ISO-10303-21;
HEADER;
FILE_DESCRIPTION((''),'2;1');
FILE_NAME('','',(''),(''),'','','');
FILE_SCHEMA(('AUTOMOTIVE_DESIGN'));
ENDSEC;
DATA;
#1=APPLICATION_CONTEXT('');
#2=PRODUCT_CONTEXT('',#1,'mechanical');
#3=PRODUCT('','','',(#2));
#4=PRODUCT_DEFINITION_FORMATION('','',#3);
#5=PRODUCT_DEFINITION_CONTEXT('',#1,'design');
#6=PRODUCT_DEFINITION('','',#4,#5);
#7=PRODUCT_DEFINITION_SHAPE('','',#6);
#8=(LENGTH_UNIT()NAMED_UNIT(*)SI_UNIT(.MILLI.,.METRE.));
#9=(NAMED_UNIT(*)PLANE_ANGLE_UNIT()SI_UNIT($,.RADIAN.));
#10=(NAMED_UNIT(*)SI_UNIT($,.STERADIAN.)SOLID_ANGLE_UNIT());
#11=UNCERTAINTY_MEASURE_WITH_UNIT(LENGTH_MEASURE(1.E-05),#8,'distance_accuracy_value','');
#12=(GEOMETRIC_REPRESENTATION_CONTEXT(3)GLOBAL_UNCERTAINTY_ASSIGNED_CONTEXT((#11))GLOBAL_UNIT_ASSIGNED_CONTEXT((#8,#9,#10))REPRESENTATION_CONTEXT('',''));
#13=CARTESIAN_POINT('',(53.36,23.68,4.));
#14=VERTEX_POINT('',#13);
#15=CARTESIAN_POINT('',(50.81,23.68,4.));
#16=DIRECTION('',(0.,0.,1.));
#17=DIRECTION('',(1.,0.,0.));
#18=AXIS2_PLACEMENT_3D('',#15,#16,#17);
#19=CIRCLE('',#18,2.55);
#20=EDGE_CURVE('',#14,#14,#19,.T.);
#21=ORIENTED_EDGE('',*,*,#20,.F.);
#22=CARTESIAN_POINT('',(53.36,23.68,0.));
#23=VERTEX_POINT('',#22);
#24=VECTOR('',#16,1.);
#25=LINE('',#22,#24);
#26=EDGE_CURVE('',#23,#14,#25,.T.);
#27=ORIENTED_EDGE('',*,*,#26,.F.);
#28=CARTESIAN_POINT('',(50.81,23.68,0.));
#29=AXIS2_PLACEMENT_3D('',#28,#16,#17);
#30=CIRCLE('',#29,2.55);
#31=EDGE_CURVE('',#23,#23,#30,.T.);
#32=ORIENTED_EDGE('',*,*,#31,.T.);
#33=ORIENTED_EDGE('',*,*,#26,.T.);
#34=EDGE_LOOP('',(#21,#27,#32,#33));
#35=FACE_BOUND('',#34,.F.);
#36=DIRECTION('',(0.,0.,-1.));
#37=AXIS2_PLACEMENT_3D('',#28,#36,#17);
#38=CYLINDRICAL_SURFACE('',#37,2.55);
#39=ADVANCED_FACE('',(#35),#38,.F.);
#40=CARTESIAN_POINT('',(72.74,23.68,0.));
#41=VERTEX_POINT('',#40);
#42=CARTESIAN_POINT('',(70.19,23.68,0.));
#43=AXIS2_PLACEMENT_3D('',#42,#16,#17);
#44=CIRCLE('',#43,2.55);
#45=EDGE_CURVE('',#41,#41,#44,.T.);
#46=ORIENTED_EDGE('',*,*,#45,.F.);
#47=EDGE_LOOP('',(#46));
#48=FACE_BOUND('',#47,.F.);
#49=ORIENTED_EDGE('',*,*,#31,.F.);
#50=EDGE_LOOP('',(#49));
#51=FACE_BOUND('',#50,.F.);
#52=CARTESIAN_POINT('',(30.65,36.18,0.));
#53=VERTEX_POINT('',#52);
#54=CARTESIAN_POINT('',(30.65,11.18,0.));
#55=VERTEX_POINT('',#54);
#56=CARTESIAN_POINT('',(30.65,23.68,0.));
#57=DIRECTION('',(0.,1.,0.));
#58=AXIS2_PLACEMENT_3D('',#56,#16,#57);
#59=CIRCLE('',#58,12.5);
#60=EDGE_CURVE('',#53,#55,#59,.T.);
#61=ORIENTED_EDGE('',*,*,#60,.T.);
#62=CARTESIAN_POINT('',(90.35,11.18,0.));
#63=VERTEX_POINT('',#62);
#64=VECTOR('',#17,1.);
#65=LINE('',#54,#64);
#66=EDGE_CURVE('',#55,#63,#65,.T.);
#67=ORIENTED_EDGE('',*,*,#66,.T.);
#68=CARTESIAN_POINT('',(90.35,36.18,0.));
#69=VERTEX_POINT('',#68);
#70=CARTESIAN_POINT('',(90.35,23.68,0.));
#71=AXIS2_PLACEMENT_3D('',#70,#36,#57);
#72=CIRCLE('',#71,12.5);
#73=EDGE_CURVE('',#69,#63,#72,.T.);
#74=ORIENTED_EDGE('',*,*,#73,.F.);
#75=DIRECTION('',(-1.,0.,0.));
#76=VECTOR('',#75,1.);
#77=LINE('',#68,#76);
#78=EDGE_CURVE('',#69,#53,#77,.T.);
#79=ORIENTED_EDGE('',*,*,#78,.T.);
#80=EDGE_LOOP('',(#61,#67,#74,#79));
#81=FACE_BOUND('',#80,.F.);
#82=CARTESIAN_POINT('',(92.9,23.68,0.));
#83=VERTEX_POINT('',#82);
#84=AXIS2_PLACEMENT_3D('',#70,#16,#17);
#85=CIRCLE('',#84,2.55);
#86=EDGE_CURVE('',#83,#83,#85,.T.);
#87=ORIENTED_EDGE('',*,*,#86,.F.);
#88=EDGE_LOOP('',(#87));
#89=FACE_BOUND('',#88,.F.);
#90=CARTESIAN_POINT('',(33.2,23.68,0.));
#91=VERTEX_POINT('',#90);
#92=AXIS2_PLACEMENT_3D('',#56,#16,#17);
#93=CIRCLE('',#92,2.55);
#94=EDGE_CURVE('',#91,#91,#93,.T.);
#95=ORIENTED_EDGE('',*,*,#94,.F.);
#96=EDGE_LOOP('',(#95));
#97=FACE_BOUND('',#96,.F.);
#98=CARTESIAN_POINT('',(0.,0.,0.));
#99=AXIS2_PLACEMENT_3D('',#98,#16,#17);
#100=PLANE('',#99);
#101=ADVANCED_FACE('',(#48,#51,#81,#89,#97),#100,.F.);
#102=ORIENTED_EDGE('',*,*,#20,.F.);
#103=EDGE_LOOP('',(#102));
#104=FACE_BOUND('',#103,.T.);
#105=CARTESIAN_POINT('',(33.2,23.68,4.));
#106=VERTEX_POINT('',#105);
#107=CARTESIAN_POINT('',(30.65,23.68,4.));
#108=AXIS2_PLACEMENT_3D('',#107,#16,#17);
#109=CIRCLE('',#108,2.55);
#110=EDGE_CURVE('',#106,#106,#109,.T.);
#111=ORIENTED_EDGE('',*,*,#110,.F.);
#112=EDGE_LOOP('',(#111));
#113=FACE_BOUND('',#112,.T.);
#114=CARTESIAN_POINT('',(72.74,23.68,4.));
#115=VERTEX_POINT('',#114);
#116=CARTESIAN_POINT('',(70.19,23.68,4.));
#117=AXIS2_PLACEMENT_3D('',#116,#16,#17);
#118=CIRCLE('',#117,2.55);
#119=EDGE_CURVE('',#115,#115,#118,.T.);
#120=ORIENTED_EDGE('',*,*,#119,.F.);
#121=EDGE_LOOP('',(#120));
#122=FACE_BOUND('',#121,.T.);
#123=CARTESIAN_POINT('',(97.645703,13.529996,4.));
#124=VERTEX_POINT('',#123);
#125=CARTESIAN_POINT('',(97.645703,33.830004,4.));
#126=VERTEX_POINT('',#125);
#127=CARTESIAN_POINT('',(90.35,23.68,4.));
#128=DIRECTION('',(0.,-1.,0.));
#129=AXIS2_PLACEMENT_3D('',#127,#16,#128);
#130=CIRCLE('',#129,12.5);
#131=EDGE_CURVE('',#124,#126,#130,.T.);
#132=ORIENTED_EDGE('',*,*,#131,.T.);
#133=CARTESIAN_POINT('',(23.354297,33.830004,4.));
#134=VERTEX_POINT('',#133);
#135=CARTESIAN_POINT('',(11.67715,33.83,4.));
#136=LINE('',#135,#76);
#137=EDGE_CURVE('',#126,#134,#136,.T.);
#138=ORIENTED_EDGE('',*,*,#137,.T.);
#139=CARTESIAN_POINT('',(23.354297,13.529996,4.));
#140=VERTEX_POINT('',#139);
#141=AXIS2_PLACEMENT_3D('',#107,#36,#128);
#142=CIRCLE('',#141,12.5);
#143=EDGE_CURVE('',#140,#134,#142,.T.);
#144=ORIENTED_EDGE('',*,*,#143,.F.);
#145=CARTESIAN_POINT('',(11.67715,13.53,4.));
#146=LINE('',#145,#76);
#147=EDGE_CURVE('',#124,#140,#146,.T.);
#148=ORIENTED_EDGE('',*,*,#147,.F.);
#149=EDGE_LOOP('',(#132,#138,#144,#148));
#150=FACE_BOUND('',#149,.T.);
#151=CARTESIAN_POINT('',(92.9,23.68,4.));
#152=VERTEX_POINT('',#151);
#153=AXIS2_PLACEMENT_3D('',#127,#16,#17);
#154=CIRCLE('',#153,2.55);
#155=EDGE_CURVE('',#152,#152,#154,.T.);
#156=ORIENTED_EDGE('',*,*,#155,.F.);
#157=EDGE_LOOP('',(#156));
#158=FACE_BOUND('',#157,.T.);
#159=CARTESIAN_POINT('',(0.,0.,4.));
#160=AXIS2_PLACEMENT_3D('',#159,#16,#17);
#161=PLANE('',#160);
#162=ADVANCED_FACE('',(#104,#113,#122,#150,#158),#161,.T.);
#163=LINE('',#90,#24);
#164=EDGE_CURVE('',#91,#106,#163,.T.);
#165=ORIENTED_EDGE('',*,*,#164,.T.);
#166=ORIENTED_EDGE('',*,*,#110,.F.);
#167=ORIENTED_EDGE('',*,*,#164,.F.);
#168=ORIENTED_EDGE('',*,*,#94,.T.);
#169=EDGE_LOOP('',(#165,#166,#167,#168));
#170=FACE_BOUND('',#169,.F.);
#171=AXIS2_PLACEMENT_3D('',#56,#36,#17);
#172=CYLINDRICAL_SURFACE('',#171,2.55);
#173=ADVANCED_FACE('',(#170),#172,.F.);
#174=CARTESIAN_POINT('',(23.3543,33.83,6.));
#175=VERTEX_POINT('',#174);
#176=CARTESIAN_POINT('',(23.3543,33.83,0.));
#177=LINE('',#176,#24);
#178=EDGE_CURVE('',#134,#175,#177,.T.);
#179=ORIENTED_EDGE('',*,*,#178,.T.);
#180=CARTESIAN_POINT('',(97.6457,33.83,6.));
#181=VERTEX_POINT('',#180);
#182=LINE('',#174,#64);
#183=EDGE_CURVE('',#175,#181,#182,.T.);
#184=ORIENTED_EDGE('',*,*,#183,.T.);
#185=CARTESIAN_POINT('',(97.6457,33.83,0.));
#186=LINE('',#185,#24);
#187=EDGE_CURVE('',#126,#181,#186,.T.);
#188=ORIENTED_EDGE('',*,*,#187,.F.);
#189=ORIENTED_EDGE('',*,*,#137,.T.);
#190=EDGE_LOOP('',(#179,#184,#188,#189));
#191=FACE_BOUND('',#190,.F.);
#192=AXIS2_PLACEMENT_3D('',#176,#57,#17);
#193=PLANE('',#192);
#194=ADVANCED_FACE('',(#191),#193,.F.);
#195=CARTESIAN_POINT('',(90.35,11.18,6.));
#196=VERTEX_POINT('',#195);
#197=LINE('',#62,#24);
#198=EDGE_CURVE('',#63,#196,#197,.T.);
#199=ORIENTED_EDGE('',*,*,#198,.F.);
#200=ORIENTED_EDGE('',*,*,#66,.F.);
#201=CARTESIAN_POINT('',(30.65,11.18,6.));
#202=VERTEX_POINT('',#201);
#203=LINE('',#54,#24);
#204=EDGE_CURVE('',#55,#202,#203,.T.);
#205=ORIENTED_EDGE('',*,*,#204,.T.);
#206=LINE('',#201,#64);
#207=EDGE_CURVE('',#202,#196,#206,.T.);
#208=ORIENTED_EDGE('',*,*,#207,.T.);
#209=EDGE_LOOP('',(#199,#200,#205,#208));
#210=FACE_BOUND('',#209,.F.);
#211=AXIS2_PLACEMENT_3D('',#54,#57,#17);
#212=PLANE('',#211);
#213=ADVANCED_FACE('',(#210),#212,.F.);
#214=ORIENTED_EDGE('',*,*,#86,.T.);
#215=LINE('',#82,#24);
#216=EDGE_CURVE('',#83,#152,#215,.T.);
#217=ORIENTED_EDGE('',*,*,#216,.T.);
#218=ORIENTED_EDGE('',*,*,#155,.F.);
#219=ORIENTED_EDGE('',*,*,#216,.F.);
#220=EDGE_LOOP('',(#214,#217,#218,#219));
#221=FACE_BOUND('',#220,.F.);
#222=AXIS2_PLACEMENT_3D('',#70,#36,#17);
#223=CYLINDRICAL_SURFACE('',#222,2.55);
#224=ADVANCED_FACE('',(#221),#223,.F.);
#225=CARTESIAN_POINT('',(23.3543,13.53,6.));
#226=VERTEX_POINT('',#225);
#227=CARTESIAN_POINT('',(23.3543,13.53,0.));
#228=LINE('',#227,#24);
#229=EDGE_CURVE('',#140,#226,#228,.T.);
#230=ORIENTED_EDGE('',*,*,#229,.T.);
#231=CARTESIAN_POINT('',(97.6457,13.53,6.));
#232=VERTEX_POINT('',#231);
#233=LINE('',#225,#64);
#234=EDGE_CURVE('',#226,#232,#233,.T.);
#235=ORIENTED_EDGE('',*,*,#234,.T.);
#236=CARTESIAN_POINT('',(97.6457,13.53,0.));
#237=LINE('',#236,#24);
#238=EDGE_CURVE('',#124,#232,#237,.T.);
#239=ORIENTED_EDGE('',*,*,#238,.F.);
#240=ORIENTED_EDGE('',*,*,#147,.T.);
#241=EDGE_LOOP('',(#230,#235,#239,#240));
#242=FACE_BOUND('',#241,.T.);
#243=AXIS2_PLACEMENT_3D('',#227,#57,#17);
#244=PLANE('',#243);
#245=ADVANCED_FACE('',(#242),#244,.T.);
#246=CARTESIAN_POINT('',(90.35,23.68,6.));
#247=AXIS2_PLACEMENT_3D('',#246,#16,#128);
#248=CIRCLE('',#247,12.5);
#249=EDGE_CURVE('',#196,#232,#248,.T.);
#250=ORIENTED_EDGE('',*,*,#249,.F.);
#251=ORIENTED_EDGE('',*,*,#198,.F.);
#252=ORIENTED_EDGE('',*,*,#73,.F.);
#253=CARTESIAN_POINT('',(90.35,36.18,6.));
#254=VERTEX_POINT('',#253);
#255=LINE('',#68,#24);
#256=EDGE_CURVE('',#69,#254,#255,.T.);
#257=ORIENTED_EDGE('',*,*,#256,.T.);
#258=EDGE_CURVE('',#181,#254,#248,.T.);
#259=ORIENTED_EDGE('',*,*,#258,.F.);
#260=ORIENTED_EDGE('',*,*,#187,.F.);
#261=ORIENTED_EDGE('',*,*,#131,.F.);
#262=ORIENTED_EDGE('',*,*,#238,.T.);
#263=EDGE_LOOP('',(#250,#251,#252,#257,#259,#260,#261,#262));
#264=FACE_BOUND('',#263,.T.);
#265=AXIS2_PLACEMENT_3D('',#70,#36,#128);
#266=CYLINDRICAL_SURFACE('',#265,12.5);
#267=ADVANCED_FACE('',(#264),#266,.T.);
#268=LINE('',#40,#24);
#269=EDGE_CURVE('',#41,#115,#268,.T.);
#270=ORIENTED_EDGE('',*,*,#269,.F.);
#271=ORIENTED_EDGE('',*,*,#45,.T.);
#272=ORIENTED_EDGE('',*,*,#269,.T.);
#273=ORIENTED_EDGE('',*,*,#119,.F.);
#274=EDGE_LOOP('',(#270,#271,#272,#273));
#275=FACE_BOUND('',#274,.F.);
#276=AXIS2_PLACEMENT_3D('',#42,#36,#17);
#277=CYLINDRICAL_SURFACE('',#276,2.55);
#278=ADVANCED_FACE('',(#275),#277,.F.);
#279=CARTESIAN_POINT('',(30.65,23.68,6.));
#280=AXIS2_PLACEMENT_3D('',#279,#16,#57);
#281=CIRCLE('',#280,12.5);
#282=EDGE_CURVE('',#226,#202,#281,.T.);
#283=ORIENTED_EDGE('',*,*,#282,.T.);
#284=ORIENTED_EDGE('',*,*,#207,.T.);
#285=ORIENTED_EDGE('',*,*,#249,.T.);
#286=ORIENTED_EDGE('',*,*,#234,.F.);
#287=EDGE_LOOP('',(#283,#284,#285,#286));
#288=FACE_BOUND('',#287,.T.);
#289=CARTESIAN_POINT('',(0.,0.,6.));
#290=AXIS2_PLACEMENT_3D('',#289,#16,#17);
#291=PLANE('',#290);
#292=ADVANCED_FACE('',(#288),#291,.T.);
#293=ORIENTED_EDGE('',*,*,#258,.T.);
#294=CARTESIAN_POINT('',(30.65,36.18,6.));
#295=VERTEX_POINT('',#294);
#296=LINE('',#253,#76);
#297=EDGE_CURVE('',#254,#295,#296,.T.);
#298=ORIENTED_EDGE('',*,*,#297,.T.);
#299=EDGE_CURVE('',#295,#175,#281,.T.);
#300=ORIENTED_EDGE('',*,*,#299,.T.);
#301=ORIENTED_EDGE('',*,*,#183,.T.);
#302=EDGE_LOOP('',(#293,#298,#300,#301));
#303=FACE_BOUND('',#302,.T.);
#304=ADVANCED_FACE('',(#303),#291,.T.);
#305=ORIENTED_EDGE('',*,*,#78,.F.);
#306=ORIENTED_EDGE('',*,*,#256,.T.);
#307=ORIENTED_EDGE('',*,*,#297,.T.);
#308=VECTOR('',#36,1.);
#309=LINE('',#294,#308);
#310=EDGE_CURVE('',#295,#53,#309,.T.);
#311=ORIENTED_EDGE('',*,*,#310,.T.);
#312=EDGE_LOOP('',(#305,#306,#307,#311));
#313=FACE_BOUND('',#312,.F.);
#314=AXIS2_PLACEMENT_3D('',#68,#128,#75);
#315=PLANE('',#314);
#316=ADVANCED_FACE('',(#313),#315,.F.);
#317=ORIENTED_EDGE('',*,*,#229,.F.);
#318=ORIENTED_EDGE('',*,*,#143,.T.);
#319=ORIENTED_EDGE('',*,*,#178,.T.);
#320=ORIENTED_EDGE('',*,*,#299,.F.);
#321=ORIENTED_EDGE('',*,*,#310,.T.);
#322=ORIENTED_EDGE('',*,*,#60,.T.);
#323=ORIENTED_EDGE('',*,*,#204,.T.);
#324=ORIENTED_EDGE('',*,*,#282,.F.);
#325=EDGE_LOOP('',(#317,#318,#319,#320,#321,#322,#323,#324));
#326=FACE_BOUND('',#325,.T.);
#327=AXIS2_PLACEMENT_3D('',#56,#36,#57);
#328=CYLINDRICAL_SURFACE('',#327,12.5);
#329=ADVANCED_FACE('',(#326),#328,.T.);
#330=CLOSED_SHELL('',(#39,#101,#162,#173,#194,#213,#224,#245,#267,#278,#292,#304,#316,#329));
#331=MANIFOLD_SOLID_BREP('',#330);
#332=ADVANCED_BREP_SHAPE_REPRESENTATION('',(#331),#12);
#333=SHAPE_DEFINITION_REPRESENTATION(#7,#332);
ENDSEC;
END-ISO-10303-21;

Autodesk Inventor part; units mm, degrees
ref_plane "YZ Plane" through (0, 0, 0) normal (1, 0, 0) x (0, 1, 0)
ref_plane "XZ Plane" through (0, 0, 0) normal (0, 1, 0) x (-1, 0, 0)
ref_plane "XY Plane" through (0, 0, 0) normal (0, 0, 1) x (1, 0, 0)
sketch "Sketch1" plane through (0, 0, 0) normal (0, 0, 1) x (1, 0, 0)
  arc A0 (-3, 3) -> (0, 0) centre (0, 3) ccw construction
  line L0 (0, 0) -> (121, 0) construction
  arc A1 (121, 0) -> (124, 3) centre (121, 3) ccw construction
  line L1 (124, 3) -> (124, 85) construction
  arc A2 (124, 85) -> (121, 88) centre (121, 85) ccw construction
  line L2 (121, 88) -> (0, 88) construction
  arc A3 (0, 88) -> (-3, 85) centre (0, 85) ccw construction
  line L3 (-3, 85) -> (-3, 3) construction
  arc A4 (63.75, 4.5) -> (63.75, 7.5) centre (63.75, 6) ccw construction
  line L4 (57.25, 4.5) -> (63.75, 4.5) construction
  arc A5 (57.25, 7.5) -> (57.25, 4.5) centre (57.25, 6) ccw construction
  line L5 (63.75, 7.5) -> (57.25, 7.5) construction
  arc A6 (70.5, 11.18) -> (70.5, 16.18) centre (70.5, 13.68) ccw construction
  line L6 (50.5, 11.18) -> (70.5, 11.18) construction
  arc A7 (50.5, 16.18) -> (50.5, 11.18) centre (50.5, 13.68) ccw construction
  line L7 (70.5, 16.18) -> (50.5, 16.18) construction
  arc A8 (43.75, 80.5) -> (43.75, 83.5) centre (43.75, 82) ccw construction
  line L8 (37.25, 80.5) -> (43.75, 80.5) construction
  arc A9 (37.25, 83.5) -> (37.25, 80.5) centre (37.25, 82) ccw construction
  line L9 (43.75, 83.5) -> (37.25, 83.5) construction
  arc A10 (70.5, 71.82) -> (70.5, 76.82) centre (70.5, 74.32) ccw construction
  line L10 (50.5, 71.82) -> (70.5, 71.82) construction
  arc A11 (50.5, 76.82) -> (50.5, 71.82) centre (50.5, 74.32) ccw construction
  line L11 (70.5, 76.82) -> (50.5, 76.82) construction
  circle A12 centre (30.65, 13.68) radius 3.55 construction
  circle A13 centre (10.65, 23.68) radius 2.55 construction
  circle A14 centre (30.65, 23.68) radius 2.55
  circle A15 centre (50.81, 23.68) radius 2.55
  circle A16 centre (80.35, 23.68) radius 2.55 construction
  circle A17 centre (100.35, 23.68) radius 2.55 construction
  circle A18 centre (100.35, 13.68) radius 2.55 construction
  circle A19 centre (80.35, 44) radius 2.55 construction
  circle A20 centre (90.35, 44) radius 2.55 construction
  circle A21 centre (80.35, 13.68) radius 2.55 construction
  circle A22 centre (100.35, 64.32) radius 2.55 construction
  circle A23 centre (80.35, 74.32) radius 2.55 construction
  circle A24 centre (90.35, 74.32) radius 2.55 construction
  circle A25 centre (30.65, 74.32) radius 3.55 construction
  circle A26 centre (40.18, 34) radius 2.55 construction
  circle A27 centre (30.65, 44) radius 3.55 construction
  circle A28 centre (70.19, 64.32) radius 2.55 construction
  circle A29 centre (20.65, 44) radius 3.55 construction
  circle A30 centre (60.5, 34) radius 2.55 construction
  circle A31 centre (100.35, 74.32) radius 2.55 construction
  circle A32 centre (90.82, 34) radius 2.55 construction
  circle A33 centre (110.35, 74.32) radius 2.55 construction
  circle A34 centre (90.82, 54) radius 2.55 construction
  circle A35 centre (75.325, 58.825) radius 2.55 construction
  circle A36 centre (30.65, 64.32) radius 2.55 construction
  circle A37 centre (10.65, 64.32) radius 2.55 construction
  circle A38 centre (45.675, 58.825) radius 2.55 construction
  circle A39 centre (10.65, 13.68) radius 3.55 construction
  circle A40 centre (10.65, 74.32) radius 3.55 construction
  circle A41 centre (50.5, 44) radius 2.55 construction
  circle A42 centre (60.5, 54) radius 2.55 construction
  circle A43 centre (60.5, 44) radius 2.55 construction
  circle A44 centre (70.5, 44) radius 2.55 construction
  circle A45 centre (40.18, 54) radius 2.55 construction
  circle A46 centre (10.65, 44) radius 3.55 construction
  circle A47 centre (30.18, 54) radius 2.55 construction
  circle A48 centre (60.5, 64.32) radius 2.55 construction
  circle A49 centre (20.65, 64.32) radius 2.55 construction
  circle A50 centre (20.65, 74.32) radius 3.55 construction
  circle A51 centre (80.82, 54) radius 2.55 construction
  circle A52 centre (40.65, 64.32) radius 2.55 construction
  circle A53 centre (110.35, 44) radius 2.55 construction
  circle A54 centre (110.35, 13.68) radius 2.55 construction
  circle A55 centre (80.82, 34) radius 2.55 construction
  circle A56 centre (75.325, 29.175) radius 2.55 construction
  circle A57 centre (50.81, 64.32) radius 2.55 construction
  circle A58 centre (80.35, 64.32) radius 2.55 construction
  circle A59 centre (45.675, 29.175) radius 2.55 construction
  circle A60 centre (30.18, 34) radius 2.55 construction
  circle A61 centre (40.65, 74.32) radius 3.55 construction
  circle A62 centre (40.65, 44) radius 3.55 construction
  circle A63 centre (90.35, 64.32) radius 2.55 construction
  circle A64 centre (110.35, 64.32) radius 2.55 construction
  circle A65 centre (100.35, 44) radius 2.55 construction
  circle A66 centre (60.5, 23.68) radius 2.55 construction
  circle A67 centre (90.35, 13.68) radius 2.55 construction
  circle A68 centre (110.35, 23.68) radius 2.55 construction
  circle A69 centre (90.35, 23.68) radius 2.55
  circle A70 centre (70.19, 23.68) radius 2.55
  circle A71 centre (40.65, 23.68) radius 2.55 construction
  circle A72 centre (20.65, 23.68) radius 2.55 construction
  circle A73 centre (40.65, 13.68) radius 3.55 construction
  circle A74 centre (20.65, 13.68) radius 3.55 construction
  arc A75 (63.75, 80.5) -> (63.75, 83.5) centre (63.75, 82) ccw construction
  line L12 (57.25, 80.5) -> (63.75, 80.5) construction
  arc A76 (57.25, 83.5) -> (57.25, 80.5) centre (57.25, 82) ccw construction
  line L13 (63.75, 83.5) -> (57.25, 83.5) construction
  arc A77 (77.25, 83.5) -> (77.25, 80.5) centre (77.25, 82) ccw construction
  line L14 (83.75, 83.5) -> (77.25, 83.5) construction
  arc A78 (83.75, 80.5) -> (83.75, 83.5) centre (83.75, 82) ccw construction
  line L15 (77.25, 80.5) -> (83.75, 80.5) construction
  arc A79 (43.75, 4.5) -> (43.75, 7.5) centre (43.75, 6) ccw construction
  line L16 (37.25, 4.5) -> (43.75, 4.5) construction
  arc A80 (37.25, 7.5) -> (37.25, 4.5) centre (37.25, 6) ccw construction
  line L17 (43.75, 7.5) -> (37.25, 7.5) construction
  arc A81 (77.25, 7.5) -> (77.25, 4.5) centre (77.25, 6) ccw construction
  line L18 (83.75, 7.5) -> (77.25, 7.5) construction
  arc A82 (83.75, 4.5) -> (83.75, 7.5) centre (83.75, 6) ccw construction
  line L19 (77.25, 4.5) -> (83.75, 4.5) construction
  line L20 (30.65, 23.68) -> (90.35, 23.68) construction
  line L21 (30.65, 11.18) -> (90.35, 11.18)
  line L22 (90.35, 36.18) -> (30.65, 36.18)
  arc A83 (30.65, 36.18) -> (30.65, 11.18) centre (30.65, 23.68) ccw
  arc A84 (90.35, 11.18) -> (90.35, 36.18) centre (90.35, 23.68) ccw
  line L23 (23.3543, 33.83) -> (97.6457, 33.83)
  line L24 (23.3543, 13.53) -> (97.6457, 13.53)
  point P0 (60.5, 23.68)
  dimension "d0" = 25
  dimension "d3" = 20.3
extrude "Extrusion1" add sketch "Sketch1" along normal blind 4
extrude "Extrusion2" add sketch "Sketch1" along normal blind 6 contours A83 L24 A84 L21 | A83 L22 A84 L23
sketch "Sketch2" plane through (30.65, 36.18, 0) normal (0, 1, 0) x (1, 0, 0)
  line L0 (0, -6) -> (59.7, -6) projected
  line L1 (29.85, -6) -> (29.85, 29.1247)
  point P0 (-30.65, 0)
surface extrude "ExtrusionSrf1" sketch "Sketch2" against normal blind 39.35 shown yes curves L1
properties part number "Espaciador Actuador - Antenas" material "PET Plastic"
